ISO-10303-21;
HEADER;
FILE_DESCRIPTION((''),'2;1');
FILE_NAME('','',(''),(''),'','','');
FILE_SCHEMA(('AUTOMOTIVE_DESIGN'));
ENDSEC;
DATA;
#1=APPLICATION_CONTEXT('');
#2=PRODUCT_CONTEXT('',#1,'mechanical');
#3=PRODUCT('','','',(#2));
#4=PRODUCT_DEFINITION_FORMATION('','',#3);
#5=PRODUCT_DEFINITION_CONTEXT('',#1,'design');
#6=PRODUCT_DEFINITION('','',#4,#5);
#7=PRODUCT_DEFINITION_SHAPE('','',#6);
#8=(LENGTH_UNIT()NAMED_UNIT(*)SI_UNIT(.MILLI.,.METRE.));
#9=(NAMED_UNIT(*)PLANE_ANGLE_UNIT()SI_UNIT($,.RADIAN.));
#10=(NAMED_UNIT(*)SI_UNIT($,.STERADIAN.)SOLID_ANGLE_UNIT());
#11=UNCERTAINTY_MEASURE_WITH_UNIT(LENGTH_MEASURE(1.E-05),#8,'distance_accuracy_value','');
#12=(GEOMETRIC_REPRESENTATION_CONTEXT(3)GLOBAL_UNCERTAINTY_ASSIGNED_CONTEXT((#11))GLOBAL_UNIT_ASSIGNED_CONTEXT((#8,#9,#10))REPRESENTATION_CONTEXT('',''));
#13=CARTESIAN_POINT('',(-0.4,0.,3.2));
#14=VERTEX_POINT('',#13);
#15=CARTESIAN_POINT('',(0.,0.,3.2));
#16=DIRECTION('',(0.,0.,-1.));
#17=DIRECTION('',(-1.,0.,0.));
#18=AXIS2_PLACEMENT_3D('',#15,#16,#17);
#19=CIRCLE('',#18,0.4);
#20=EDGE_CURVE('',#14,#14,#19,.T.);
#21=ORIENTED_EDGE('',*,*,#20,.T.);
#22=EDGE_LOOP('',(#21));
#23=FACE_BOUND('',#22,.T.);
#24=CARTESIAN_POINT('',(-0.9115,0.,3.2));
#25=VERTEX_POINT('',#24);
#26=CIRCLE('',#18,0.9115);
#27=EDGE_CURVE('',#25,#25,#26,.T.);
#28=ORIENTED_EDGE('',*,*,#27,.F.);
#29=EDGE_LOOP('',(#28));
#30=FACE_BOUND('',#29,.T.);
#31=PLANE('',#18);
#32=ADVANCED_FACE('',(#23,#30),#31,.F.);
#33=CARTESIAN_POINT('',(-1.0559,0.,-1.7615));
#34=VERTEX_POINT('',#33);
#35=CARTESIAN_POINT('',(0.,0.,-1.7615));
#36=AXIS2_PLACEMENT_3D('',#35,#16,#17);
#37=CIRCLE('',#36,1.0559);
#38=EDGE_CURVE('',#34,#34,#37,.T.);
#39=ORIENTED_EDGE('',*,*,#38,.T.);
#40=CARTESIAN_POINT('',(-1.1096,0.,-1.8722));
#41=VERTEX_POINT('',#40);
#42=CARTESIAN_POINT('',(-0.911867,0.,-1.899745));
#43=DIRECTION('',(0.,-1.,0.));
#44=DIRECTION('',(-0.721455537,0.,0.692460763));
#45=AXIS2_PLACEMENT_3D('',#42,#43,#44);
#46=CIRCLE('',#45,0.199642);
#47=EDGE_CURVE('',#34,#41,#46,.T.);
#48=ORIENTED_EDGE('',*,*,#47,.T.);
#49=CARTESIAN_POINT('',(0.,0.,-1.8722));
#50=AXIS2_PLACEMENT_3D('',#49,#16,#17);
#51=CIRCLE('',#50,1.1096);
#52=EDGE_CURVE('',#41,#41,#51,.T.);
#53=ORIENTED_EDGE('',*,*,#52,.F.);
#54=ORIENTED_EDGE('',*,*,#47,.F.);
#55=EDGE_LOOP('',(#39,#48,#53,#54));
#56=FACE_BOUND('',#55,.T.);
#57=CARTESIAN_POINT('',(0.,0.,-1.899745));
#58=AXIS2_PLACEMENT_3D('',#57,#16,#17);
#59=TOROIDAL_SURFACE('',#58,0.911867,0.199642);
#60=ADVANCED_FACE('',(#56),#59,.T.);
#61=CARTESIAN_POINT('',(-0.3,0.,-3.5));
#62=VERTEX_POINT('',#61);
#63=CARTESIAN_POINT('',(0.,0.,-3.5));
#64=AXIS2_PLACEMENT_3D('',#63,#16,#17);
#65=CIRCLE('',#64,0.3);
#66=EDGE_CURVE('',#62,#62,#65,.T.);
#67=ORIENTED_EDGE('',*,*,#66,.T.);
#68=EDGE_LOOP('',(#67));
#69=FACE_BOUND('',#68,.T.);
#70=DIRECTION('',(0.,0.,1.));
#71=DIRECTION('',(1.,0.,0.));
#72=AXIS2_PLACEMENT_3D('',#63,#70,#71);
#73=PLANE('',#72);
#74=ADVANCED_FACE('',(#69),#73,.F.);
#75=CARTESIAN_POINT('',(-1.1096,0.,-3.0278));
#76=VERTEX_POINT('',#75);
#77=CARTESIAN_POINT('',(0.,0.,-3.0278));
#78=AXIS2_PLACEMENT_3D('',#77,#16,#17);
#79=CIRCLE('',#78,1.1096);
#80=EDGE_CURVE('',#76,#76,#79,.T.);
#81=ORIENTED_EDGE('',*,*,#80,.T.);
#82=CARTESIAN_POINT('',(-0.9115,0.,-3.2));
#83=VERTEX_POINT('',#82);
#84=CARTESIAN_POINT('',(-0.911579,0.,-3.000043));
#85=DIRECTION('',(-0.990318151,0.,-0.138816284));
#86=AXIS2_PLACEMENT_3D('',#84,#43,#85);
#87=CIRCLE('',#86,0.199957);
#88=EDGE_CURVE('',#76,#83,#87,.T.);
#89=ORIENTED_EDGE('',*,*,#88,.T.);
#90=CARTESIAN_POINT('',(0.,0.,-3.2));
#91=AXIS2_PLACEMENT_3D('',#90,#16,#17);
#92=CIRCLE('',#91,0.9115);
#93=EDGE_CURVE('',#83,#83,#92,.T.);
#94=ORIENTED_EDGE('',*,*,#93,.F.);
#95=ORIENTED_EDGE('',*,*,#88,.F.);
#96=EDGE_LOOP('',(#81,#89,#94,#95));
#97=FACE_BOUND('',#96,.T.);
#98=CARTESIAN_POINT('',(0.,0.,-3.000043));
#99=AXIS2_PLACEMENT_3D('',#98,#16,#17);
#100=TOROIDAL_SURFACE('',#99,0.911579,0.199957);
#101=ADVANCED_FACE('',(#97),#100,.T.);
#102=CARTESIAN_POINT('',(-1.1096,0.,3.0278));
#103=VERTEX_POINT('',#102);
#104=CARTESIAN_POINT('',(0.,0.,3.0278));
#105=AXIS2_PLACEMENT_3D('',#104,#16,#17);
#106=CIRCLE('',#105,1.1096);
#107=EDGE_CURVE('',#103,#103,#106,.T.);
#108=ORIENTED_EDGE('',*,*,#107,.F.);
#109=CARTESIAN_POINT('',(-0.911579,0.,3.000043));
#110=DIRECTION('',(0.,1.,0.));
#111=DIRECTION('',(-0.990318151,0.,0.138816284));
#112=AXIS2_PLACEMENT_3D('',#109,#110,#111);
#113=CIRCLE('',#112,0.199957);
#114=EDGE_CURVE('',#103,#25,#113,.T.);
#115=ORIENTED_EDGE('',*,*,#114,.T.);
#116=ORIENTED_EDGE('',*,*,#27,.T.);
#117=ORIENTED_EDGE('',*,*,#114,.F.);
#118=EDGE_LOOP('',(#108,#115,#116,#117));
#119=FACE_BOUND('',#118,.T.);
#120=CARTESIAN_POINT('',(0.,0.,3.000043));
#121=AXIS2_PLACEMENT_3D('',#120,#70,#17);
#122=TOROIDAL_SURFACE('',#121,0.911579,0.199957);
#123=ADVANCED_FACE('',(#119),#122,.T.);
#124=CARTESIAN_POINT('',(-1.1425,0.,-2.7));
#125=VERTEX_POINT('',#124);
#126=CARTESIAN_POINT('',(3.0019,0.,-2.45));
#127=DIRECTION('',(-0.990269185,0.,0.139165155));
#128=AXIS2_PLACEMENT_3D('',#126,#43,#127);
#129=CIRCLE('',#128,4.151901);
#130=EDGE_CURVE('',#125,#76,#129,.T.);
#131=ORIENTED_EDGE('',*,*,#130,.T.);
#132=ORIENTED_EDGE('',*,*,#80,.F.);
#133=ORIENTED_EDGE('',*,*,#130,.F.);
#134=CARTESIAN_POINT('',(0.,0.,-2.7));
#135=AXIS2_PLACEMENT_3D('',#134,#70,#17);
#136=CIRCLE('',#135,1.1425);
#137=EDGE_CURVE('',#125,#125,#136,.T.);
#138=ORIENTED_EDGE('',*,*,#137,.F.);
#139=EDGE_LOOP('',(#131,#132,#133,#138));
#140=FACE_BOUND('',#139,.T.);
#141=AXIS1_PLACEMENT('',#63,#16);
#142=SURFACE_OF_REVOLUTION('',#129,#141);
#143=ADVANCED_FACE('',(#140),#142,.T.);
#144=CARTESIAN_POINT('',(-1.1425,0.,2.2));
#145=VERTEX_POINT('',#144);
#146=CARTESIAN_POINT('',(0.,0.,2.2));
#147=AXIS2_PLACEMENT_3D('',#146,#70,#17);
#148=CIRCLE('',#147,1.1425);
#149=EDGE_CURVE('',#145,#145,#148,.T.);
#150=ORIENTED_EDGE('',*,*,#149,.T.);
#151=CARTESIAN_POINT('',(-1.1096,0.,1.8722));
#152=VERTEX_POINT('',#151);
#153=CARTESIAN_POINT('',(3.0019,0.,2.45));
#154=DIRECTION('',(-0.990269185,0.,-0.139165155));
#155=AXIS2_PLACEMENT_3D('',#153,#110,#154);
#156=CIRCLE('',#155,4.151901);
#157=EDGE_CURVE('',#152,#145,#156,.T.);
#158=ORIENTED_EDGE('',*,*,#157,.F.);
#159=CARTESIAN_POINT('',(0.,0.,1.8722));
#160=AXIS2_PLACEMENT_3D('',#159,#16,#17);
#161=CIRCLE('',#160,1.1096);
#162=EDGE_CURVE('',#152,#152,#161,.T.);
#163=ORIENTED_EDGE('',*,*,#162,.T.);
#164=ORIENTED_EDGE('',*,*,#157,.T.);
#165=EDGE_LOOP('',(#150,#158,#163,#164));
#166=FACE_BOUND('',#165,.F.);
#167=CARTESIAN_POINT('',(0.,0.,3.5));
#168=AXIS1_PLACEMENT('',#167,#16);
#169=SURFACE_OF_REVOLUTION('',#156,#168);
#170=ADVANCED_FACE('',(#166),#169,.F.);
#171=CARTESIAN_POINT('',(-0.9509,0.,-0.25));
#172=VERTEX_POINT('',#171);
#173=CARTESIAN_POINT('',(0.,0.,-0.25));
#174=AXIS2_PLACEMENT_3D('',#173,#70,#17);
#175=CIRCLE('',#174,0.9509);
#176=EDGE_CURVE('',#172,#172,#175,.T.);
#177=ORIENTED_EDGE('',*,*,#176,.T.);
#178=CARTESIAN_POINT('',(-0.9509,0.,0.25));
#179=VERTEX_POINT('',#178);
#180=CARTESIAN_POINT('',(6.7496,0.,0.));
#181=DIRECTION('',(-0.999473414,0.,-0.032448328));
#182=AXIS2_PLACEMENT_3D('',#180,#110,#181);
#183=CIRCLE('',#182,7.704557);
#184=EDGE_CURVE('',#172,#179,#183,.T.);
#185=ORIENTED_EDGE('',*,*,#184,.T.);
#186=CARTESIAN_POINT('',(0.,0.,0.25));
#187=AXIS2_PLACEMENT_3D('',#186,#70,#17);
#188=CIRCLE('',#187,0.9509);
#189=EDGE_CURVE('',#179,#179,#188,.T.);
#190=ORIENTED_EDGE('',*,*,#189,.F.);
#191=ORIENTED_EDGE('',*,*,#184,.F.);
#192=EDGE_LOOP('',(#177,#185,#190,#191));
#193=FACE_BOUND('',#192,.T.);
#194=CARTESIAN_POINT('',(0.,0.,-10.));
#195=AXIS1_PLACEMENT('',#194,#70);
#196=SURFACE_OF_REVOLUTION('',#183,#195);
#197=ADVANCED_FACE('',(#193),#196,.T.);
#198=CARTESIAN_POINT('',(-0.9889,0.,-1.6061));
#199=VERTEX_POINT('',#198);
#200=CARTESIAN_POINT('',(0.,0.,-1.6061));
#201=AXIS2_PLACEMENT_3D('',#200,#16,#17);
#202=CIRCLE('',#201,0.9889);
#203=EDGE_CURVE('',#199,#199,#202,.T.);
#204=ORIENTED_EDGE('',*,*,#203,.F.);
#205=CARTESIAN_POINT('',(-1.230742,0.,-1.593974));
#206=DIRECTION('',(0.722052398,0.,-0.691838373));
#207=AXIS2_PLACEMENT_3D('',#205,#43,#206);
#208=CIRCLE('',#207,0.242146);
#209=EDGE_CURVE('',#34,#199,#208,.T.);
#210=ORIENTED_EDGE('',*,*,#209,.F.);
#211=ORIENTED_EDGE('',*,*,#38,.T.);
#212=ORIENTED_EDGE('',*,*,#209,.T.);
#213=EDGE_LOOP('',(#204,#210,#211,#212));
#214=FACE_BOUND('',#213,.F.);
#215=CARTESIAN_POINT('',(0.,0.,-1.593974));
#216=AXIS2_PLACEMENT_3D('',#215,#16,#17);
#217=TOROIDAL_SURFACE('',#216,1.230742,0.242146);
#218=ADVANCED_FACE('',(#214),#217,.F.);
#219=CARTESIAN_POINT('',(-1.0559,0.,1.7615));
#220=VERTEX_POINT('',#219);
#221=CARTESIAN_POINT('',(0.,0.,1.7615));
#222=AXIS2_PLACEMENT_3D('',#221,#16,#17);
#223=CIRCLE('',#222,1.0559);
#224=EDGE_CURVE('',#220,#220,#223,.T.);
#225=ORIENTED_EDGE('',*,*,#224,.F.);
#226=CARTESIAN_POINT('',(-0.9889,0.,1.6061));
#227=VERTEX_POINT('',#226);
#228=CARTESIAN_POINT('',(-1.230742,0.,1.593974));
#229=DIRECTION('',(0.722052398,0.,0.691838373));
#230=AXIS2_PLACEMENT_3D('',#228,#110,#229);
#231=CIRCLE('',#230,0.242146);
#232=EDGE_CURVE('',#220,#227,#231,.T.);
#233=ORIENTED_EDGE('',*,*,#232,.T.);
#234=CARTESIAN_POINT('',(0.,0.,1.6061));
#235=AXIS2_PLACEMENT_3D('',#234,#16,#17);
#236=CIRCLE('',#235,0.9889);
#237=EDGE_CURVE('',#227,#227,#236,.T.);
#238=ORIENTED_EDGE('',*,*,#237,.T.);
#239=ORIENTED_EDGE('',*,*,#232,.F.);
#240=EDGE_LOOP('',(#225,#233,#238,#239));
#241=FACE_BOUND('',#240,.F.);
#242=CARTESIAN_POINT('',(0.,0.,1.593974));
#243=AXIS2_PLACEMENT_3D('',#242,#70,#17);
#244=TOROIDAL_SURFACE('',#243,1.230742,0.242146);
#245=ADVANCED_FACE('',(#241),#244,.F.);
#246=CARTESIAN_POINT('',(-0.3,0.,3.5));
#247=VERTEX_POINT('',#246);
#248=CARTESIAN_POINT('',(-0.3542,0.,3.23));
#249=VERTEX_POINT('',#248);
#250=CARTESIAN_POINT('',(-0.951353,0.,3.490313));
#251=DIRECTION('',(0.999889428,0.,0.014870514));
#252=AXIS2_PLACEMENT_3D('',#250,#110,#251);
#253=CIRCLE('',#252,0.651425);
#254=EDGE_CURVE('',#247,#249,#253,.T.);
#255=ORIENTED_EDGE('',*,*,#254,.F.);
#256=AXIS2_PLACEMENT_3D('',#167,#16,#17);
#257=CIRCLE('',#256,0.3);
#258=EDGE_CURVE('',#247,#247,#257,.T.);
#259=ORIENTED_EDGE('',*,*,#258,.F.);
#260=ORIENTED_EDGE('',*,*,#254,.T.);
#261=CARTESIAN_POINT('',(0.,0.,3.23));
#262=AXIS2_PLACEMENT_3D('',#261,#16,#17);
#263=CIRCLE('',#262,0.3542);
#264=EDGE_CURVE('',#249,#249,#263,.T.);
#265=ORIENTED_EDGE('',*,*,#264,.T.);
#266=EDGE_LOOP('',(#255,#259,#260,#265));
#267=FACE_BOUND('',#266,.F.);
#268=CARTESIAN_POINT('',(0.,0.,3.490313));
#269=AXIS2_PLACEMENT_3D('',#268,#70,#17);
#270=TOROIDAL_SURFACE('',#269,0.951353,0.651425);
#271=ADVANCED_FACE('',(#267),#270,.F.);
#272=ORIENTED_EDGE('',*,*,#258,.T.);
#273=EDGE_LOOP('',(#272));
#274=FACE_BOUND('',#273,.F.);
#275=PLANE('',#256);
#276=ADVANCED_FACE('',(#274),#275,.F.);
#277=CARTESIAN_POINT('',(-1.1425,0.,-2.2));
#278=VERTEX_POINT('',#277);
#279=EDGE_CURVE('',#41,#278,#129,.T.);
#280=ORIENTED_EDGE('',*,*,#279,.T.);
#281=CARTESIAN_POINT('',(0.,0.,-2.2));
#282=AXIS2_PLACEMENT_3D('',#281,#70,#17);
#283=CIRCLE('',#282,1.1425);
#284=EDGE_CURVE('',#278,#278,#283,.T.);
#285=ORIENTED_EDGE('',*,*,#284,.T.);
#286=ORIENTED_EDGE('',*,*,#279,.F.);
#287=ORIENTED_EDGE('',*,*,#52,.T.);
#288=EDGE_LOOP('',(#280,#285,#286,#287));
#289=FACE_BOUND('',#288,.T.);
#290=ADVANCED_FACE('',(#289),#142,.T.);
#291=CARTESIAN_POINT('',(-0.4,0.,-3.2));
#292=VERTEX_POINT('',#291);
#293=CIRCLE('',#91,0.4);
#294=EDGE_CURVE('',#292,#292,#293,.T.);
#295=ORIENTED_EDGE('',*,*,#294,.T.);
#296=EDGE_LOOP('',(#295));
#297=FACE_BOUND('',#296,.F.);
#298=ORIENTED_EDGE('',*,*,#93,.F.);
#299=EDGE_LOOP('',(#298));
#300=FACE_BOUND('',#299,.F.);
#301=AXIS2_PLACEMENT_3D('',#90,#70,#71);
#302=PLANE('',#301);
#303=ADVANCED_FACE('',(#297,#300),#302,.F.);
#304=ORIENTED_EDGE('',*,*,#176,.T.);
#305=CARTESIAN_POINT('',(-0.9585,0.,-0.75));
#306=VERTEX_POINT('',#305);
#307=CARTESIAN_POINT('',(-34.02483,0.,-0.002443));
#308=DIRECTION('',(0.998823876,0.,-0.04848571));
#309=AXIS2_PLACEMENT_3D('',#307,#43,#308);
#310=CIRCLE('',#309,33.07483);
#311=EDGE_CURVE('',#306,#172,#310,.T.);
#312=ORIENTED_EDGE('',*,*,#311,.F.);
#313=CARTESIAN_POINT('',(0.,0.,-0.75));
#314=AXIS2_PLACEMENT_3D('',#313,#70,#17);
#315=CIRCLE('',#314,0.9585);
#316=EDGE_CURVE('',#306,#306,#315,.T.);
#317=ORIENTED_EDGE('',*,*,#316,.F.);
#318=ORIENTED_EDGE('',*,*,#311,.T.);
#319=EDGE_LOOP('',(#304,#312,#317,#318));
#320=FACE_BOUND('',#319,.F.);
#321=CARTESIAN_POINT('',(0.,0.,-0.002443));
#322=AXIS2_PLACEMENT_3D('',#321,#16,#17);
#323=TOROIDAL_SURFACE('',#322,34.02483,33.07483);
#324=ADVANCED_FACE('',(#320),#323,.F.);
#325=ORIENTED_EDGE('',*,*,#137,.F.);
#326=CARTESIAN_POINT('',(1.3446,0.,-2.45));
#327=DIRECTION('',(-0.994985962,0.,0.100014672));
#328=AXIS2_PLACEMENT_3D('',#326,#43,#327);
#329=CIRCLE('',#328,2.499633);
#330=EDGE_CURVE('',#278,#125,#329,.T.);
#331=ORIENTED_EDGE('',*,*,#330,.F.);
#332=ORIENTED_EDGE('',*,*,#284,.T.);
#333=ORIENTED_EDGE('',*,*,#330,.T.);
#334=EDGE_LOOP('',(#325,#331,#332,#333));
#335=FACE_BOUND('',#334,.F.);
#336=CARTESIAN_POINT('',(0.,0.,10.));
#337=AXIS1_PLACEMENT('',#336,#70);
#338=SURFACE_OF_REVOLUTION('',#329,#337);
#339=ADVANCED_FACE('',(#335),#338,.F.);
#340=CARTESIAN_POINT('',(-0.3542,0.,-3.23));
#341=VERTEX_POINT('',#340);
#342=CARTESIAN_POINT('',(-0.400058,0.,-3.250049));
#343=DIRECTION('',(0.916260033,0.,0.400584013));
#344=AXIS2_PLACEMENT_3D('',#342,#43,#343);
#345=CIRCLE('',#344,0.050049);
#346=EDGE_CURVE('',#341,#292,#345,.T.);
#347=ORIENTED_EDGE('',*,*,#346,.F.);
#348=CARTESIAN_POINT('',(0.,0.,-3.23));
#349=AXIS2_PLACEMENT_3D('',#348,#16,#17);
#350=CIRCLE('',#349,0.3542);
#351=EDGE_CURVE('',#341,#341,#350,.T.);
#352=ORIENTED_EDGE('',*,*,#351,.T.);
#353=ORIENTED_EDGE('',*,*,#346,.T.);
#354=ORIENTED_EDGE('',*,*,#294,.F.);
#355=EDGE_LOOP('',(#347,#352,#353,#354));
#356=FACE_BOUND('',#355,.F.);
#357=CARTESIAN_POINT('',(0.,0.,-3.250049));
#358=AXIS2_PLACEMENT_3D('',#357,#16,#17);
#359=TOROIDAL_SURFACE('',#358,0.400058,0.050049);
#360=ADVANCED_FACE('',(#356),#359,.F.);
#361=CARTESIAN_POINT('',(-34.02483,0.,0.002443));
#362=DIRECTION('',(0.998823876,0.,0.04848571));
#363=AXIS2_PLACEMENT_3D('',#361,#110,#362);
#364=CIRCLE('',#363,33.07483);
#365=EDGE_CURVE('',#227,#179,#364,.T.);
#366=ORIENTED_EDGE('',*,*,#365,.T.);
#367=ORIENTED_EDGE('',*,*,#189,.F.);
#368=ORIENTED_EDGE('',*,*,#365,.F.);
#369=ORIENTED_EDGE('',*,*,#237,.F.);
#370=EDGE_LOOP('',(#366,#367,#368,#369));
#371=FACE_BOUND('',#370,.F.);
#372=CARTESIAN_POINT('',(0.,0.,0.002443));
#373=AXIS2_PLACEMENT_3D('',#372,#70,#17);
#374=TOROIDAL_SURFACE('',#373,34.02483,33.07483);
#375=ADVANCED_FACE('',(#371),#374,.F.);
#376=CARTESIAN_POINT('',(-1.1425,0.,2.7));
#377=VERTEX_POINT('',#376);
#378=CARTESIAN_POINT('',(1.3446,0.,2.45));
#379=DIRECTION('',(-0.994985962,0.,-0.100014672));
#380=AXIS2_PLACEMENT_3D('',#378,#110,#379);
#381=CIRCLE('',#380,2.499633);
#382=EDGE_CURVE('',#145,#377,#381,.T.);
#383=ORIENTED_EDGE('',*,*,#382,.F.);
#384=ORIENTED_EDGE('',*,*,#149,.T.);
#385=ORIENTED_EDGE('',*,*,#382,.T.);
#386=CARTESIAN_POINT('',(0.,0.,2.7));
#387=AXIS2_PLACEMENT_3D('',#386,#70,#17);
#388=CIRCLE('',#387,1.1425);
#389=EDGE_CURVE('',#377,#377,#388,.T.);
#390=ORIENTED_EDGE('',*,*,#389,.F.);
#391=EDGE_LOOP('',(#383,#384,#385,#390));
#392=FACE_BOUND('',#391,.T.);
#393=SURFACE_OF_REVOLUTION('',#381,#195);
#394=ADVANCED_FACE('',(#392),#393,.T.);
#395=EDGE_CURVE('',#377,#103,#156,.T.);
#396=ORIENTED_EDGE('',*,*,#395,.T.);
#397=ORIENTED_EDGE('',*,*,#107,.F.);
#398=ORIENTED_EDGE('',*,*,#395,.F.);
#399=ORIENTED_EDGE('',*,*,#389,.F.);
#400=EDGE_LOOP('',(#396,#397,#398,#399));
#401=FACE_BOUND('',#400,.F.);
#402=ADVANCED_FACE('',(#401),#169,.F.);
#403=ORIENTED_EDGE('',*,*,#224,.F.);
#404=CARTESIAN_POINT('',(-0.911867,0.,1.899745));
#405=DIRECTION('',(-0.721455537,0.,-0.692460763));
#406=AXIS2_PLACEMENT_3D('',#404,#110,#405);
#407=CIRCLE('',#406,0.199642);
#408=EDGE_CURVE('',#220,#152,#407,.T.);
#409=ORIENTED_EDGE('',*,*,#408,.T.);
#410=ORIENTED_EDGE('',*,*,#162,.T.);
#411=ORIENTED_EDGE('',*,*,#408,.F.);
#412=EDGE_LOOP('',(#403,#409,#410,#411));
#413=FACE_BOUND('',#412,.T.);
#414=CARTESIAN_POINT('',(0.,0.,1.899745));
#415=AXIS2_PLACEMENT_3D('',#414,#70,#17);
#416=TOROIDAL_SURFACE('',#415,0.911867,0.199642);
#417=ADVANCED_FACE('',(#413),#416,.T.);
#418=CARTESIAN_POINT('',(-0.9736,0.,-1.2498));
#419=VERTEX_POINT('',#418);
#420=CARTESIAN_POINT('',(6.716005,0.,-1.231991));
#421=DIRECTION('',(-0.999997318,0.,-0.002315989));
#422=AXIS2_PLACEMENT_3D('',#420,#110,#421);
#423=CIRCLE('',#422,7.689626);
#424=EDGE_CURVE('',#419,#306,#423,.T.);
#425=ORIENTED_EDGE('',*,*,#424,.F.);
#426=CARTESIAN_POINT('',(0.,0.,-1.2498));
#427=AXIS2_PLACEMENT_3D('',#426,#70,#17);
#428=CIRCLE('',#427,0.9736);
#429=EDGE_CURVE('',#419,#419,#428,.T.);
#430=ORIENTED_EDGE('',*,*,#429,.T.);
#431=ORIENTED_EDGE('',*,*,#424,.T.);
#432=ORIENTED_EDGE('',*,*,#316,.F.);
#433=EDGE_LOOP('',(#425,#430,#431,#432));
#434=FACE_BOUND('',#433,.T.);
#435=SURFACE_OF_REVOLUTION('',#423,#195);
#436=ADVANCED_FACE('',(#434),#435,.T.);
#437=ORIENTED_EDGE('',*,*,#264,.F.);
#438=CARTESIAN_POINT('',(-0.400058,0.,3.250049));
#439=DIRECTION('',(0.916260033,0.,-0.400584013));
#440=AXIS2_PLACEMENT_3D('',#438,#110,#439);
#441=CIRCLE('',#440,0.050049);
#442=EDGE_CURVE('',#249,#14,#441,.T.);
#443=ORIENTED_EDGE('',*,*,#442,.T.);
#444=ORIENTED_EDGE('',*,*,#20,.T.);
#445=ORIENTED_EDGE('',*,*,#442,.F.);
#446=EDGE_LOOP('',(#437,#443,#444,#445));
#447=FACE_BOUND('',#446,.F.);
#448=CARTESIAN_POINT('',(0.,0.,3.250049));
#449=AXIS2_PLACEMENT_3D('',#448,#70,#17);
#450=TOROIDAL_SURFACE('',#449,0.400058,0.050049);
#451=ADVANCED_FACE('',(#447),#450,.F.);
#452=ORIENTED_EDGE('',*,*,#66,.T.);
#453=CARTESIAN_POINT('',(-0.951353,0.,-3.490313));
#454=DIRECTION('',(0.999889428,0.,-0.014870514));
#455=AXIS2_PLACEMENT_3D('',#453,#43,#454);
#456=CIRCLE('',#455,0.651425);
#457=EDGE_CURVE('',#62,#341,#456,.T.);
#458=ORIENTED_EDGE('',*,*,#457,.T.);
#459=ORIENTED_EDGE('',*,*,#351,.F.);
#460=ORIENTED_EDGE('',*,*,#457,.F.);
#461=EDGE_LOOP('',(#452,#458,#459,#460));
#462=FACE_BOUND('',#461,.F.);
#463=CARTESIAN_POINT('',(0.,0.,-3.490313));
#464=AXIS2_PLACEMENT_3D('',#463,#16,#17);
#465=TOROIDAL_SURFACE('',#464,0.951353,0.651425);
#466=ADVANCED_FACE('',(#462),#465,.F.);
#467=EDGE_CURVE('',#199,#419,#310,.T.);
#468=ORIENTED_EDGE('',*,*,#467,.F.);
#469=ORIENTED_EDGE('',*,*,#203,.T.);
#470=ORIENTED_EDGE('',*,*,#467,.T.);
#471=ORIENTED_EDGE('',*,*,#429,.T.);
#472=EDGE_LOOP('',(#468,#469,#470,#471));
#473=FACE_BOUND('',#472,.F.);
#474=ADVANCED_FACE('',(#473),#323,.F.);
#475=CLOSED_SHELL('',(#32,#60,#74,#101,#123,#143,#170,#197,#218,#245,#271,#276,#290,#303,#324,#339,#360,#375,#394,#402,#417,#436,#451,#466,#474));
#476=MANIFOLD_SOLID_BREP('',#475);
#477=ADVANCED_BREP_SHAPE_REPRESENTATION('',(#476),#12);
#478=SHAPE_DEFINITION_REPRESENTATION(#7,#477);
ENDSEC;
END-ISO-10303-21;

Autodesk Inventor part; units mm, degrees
ref_plane "YZ Plane" through (0, 0, 0) normal (1, 0, 0) x (0, 1, 0)
ref_plane "XZ Plane" through (0, 0, 0) normal (0, 1, 0) x (-1, 0, 0)
ref_plane "XY Plane" through (0, 0, 0) normal (0, 0, 1) x (1, 0, 0)
sketch "Skizze5" plane through (0, 0, 0) normal (0, 1, 0) x (-1, 0, 0)
  line L0 (0, 4.4678) -> (0, 0)
  line L1 (0.95, 0) -> (0, 0)
  line L2 (0.4, 3.2) -> (0.9115, 3.2)
  line L3 (0.9115, 1.7) -> (0.4352, 1.7) construction
  arc A0 (1.1096, 3.0278) -> (0.9115, 3.2) centre (0.9115, 3) ccw
  arc A1 (0.9115, 1.7) -> (1.0559, 1.7615) centre (0.9115, 1.9) ccw construction
  arc A2 (1.1096, 1.8722) -> (1.1096, 3.0278) centre (-3.0019, 2.45) ccw
  line L4 (1.15, 2.45) -> (-3.0019, 2.45) construction
  line L5 (0.9115, 1.9) -> (0.9115, 3) construction
  arc A3 (1.0559, 1.7615) -> (1.1096, 1.8722) centre (0.9115, 1.9) ccw
  arc A4 (0.3542, 3.23) -> (0.4, 3.2) centre (0.4, 3.25) ccw
  line L6 (0.9115, 3) -> (1.1096, 3.0278) construction
  arc A5 (1.0559, 1.7615) -> (0.9889, 1.6061) centre (1.2301, 1.5944) ccw
  line L7 (0.3, 3.5) -> (0, 3.5)
  line L8 (0, 3.5) -> (0, 0)
  arc A6 (0.3, 3.5) -> (0.3542, 3.23) centre (0.9523, 3.4904) ccw
  arc A7 (0.9889, 1.6061) -> (0.95, 0) centre (34.092, 0) ccw
  line L9 (34.092, 0) -> (0.95, 0) construction
  dimension "d12" = 1.5
  dimension "d14" = 0.2
  dimension "d16" = 1.9
  dimension "d17" = 2.3
  dimension "d18" = 0.75
  dimension "d21" = 98
  dimension "d22" = 0.3
  dimension "d23" = 3.2
revolve "Umdrehung1" add sketch "Skizze5" angle 360 about axis through (0, 0, 4.4678) along (0, 0, -1)
mirror "Spiegeln2" about plane through (0, 0, 0) normal (0, 0, 1) of "Umdrehung1"
sketch "Skizze6" plane through (0, 0, 0) normal (0, 1, 0) x (-1, 0, 0)
  arc A0 (1.1096, 1.8722) -> (1.1096, 3.0278) centre (-3.0019, 2.45) ccw projected
  arc A1 (1.1425, 2.2) -> (1.1425, 2.7) centre (-1.3446, 2.45) ccw
  line L0 (-3.0019, 2.45) -> (-1.3446, 2.45)
  line L1 (0, -4.9) -> (0, 4.9) projected
  point P0 (0, 0)
  dimension "d25" = 0.5
  dimension "d26" = 0.005
revolve "Umdrehung2" add sketch "Skizze6" angle 360 about axis through (0, 0, -10) along (0, 0, 1)
mirror "Spiegeln3" about plane through (0, 0, 0) normal (0, 0, 1) of "Umdrehung2"
sketch "Skizze7" plane through (0, 0, 0) normal (0, 1, 0) x (-1, 0, 0)
  arc A0 (0.9889, 1.6061) -> (0.9889, -1.6061) centre (34.092, 0) ccw projected
  arc A1 (0.9509, -0.25) -> (0.9509, 0.25) centre (-6.7496, 0) ccw
  line L0 (-6.7496, 0) -> (0, 0)
  line L1 (0.9509, 0.25) -> (0.9509, -0.25) construction
  line L2 (0, -4.9) -> (0, 4.9) projected
  dimension "d28" = 0.005
  dimension "d29" = 0.5
revolve "Umdrehung3" add sketch "Skizze7" angle 360 about axis through (0, 0, -10) along (0, 0, 1)
sketch "Skizze8" plane through (0, 0, 0) normal (0, 1, 0) x (-1, 0, 0)
  arc A0 (0.9509, -0.25) -> (0.9889, -1.6061) centre (34.092, 0) ccw projected
  line L0 (0, 0) -> (-1.7052, 0)
  line L1 (-6.731, -1.2322) -> (0.235, -1.2322)
  arc A1 (0.9736, -1.2498) -> (0.9585, -0.75) centre (-6.731, -1.2322) ccw
  line L2 (0.9736, -1.2498) -> (0.9585, -0.75) construction
  line L3 (0, -4.9) -> (0, 4.9) projected
  dimension "d32" = 0.005
  dimension "d34" = 0.5
  dimension "d35" = 0.5
revolve "Umdrehung4" add sketch "Skizze8" angle 360 about axis through (0, 0, -10) along (0, 0, 1)
equation "\"d18\" = 0.5 * d12"
properties part number "HVU_resistor_1M5_(VR25000001504JA100)"
